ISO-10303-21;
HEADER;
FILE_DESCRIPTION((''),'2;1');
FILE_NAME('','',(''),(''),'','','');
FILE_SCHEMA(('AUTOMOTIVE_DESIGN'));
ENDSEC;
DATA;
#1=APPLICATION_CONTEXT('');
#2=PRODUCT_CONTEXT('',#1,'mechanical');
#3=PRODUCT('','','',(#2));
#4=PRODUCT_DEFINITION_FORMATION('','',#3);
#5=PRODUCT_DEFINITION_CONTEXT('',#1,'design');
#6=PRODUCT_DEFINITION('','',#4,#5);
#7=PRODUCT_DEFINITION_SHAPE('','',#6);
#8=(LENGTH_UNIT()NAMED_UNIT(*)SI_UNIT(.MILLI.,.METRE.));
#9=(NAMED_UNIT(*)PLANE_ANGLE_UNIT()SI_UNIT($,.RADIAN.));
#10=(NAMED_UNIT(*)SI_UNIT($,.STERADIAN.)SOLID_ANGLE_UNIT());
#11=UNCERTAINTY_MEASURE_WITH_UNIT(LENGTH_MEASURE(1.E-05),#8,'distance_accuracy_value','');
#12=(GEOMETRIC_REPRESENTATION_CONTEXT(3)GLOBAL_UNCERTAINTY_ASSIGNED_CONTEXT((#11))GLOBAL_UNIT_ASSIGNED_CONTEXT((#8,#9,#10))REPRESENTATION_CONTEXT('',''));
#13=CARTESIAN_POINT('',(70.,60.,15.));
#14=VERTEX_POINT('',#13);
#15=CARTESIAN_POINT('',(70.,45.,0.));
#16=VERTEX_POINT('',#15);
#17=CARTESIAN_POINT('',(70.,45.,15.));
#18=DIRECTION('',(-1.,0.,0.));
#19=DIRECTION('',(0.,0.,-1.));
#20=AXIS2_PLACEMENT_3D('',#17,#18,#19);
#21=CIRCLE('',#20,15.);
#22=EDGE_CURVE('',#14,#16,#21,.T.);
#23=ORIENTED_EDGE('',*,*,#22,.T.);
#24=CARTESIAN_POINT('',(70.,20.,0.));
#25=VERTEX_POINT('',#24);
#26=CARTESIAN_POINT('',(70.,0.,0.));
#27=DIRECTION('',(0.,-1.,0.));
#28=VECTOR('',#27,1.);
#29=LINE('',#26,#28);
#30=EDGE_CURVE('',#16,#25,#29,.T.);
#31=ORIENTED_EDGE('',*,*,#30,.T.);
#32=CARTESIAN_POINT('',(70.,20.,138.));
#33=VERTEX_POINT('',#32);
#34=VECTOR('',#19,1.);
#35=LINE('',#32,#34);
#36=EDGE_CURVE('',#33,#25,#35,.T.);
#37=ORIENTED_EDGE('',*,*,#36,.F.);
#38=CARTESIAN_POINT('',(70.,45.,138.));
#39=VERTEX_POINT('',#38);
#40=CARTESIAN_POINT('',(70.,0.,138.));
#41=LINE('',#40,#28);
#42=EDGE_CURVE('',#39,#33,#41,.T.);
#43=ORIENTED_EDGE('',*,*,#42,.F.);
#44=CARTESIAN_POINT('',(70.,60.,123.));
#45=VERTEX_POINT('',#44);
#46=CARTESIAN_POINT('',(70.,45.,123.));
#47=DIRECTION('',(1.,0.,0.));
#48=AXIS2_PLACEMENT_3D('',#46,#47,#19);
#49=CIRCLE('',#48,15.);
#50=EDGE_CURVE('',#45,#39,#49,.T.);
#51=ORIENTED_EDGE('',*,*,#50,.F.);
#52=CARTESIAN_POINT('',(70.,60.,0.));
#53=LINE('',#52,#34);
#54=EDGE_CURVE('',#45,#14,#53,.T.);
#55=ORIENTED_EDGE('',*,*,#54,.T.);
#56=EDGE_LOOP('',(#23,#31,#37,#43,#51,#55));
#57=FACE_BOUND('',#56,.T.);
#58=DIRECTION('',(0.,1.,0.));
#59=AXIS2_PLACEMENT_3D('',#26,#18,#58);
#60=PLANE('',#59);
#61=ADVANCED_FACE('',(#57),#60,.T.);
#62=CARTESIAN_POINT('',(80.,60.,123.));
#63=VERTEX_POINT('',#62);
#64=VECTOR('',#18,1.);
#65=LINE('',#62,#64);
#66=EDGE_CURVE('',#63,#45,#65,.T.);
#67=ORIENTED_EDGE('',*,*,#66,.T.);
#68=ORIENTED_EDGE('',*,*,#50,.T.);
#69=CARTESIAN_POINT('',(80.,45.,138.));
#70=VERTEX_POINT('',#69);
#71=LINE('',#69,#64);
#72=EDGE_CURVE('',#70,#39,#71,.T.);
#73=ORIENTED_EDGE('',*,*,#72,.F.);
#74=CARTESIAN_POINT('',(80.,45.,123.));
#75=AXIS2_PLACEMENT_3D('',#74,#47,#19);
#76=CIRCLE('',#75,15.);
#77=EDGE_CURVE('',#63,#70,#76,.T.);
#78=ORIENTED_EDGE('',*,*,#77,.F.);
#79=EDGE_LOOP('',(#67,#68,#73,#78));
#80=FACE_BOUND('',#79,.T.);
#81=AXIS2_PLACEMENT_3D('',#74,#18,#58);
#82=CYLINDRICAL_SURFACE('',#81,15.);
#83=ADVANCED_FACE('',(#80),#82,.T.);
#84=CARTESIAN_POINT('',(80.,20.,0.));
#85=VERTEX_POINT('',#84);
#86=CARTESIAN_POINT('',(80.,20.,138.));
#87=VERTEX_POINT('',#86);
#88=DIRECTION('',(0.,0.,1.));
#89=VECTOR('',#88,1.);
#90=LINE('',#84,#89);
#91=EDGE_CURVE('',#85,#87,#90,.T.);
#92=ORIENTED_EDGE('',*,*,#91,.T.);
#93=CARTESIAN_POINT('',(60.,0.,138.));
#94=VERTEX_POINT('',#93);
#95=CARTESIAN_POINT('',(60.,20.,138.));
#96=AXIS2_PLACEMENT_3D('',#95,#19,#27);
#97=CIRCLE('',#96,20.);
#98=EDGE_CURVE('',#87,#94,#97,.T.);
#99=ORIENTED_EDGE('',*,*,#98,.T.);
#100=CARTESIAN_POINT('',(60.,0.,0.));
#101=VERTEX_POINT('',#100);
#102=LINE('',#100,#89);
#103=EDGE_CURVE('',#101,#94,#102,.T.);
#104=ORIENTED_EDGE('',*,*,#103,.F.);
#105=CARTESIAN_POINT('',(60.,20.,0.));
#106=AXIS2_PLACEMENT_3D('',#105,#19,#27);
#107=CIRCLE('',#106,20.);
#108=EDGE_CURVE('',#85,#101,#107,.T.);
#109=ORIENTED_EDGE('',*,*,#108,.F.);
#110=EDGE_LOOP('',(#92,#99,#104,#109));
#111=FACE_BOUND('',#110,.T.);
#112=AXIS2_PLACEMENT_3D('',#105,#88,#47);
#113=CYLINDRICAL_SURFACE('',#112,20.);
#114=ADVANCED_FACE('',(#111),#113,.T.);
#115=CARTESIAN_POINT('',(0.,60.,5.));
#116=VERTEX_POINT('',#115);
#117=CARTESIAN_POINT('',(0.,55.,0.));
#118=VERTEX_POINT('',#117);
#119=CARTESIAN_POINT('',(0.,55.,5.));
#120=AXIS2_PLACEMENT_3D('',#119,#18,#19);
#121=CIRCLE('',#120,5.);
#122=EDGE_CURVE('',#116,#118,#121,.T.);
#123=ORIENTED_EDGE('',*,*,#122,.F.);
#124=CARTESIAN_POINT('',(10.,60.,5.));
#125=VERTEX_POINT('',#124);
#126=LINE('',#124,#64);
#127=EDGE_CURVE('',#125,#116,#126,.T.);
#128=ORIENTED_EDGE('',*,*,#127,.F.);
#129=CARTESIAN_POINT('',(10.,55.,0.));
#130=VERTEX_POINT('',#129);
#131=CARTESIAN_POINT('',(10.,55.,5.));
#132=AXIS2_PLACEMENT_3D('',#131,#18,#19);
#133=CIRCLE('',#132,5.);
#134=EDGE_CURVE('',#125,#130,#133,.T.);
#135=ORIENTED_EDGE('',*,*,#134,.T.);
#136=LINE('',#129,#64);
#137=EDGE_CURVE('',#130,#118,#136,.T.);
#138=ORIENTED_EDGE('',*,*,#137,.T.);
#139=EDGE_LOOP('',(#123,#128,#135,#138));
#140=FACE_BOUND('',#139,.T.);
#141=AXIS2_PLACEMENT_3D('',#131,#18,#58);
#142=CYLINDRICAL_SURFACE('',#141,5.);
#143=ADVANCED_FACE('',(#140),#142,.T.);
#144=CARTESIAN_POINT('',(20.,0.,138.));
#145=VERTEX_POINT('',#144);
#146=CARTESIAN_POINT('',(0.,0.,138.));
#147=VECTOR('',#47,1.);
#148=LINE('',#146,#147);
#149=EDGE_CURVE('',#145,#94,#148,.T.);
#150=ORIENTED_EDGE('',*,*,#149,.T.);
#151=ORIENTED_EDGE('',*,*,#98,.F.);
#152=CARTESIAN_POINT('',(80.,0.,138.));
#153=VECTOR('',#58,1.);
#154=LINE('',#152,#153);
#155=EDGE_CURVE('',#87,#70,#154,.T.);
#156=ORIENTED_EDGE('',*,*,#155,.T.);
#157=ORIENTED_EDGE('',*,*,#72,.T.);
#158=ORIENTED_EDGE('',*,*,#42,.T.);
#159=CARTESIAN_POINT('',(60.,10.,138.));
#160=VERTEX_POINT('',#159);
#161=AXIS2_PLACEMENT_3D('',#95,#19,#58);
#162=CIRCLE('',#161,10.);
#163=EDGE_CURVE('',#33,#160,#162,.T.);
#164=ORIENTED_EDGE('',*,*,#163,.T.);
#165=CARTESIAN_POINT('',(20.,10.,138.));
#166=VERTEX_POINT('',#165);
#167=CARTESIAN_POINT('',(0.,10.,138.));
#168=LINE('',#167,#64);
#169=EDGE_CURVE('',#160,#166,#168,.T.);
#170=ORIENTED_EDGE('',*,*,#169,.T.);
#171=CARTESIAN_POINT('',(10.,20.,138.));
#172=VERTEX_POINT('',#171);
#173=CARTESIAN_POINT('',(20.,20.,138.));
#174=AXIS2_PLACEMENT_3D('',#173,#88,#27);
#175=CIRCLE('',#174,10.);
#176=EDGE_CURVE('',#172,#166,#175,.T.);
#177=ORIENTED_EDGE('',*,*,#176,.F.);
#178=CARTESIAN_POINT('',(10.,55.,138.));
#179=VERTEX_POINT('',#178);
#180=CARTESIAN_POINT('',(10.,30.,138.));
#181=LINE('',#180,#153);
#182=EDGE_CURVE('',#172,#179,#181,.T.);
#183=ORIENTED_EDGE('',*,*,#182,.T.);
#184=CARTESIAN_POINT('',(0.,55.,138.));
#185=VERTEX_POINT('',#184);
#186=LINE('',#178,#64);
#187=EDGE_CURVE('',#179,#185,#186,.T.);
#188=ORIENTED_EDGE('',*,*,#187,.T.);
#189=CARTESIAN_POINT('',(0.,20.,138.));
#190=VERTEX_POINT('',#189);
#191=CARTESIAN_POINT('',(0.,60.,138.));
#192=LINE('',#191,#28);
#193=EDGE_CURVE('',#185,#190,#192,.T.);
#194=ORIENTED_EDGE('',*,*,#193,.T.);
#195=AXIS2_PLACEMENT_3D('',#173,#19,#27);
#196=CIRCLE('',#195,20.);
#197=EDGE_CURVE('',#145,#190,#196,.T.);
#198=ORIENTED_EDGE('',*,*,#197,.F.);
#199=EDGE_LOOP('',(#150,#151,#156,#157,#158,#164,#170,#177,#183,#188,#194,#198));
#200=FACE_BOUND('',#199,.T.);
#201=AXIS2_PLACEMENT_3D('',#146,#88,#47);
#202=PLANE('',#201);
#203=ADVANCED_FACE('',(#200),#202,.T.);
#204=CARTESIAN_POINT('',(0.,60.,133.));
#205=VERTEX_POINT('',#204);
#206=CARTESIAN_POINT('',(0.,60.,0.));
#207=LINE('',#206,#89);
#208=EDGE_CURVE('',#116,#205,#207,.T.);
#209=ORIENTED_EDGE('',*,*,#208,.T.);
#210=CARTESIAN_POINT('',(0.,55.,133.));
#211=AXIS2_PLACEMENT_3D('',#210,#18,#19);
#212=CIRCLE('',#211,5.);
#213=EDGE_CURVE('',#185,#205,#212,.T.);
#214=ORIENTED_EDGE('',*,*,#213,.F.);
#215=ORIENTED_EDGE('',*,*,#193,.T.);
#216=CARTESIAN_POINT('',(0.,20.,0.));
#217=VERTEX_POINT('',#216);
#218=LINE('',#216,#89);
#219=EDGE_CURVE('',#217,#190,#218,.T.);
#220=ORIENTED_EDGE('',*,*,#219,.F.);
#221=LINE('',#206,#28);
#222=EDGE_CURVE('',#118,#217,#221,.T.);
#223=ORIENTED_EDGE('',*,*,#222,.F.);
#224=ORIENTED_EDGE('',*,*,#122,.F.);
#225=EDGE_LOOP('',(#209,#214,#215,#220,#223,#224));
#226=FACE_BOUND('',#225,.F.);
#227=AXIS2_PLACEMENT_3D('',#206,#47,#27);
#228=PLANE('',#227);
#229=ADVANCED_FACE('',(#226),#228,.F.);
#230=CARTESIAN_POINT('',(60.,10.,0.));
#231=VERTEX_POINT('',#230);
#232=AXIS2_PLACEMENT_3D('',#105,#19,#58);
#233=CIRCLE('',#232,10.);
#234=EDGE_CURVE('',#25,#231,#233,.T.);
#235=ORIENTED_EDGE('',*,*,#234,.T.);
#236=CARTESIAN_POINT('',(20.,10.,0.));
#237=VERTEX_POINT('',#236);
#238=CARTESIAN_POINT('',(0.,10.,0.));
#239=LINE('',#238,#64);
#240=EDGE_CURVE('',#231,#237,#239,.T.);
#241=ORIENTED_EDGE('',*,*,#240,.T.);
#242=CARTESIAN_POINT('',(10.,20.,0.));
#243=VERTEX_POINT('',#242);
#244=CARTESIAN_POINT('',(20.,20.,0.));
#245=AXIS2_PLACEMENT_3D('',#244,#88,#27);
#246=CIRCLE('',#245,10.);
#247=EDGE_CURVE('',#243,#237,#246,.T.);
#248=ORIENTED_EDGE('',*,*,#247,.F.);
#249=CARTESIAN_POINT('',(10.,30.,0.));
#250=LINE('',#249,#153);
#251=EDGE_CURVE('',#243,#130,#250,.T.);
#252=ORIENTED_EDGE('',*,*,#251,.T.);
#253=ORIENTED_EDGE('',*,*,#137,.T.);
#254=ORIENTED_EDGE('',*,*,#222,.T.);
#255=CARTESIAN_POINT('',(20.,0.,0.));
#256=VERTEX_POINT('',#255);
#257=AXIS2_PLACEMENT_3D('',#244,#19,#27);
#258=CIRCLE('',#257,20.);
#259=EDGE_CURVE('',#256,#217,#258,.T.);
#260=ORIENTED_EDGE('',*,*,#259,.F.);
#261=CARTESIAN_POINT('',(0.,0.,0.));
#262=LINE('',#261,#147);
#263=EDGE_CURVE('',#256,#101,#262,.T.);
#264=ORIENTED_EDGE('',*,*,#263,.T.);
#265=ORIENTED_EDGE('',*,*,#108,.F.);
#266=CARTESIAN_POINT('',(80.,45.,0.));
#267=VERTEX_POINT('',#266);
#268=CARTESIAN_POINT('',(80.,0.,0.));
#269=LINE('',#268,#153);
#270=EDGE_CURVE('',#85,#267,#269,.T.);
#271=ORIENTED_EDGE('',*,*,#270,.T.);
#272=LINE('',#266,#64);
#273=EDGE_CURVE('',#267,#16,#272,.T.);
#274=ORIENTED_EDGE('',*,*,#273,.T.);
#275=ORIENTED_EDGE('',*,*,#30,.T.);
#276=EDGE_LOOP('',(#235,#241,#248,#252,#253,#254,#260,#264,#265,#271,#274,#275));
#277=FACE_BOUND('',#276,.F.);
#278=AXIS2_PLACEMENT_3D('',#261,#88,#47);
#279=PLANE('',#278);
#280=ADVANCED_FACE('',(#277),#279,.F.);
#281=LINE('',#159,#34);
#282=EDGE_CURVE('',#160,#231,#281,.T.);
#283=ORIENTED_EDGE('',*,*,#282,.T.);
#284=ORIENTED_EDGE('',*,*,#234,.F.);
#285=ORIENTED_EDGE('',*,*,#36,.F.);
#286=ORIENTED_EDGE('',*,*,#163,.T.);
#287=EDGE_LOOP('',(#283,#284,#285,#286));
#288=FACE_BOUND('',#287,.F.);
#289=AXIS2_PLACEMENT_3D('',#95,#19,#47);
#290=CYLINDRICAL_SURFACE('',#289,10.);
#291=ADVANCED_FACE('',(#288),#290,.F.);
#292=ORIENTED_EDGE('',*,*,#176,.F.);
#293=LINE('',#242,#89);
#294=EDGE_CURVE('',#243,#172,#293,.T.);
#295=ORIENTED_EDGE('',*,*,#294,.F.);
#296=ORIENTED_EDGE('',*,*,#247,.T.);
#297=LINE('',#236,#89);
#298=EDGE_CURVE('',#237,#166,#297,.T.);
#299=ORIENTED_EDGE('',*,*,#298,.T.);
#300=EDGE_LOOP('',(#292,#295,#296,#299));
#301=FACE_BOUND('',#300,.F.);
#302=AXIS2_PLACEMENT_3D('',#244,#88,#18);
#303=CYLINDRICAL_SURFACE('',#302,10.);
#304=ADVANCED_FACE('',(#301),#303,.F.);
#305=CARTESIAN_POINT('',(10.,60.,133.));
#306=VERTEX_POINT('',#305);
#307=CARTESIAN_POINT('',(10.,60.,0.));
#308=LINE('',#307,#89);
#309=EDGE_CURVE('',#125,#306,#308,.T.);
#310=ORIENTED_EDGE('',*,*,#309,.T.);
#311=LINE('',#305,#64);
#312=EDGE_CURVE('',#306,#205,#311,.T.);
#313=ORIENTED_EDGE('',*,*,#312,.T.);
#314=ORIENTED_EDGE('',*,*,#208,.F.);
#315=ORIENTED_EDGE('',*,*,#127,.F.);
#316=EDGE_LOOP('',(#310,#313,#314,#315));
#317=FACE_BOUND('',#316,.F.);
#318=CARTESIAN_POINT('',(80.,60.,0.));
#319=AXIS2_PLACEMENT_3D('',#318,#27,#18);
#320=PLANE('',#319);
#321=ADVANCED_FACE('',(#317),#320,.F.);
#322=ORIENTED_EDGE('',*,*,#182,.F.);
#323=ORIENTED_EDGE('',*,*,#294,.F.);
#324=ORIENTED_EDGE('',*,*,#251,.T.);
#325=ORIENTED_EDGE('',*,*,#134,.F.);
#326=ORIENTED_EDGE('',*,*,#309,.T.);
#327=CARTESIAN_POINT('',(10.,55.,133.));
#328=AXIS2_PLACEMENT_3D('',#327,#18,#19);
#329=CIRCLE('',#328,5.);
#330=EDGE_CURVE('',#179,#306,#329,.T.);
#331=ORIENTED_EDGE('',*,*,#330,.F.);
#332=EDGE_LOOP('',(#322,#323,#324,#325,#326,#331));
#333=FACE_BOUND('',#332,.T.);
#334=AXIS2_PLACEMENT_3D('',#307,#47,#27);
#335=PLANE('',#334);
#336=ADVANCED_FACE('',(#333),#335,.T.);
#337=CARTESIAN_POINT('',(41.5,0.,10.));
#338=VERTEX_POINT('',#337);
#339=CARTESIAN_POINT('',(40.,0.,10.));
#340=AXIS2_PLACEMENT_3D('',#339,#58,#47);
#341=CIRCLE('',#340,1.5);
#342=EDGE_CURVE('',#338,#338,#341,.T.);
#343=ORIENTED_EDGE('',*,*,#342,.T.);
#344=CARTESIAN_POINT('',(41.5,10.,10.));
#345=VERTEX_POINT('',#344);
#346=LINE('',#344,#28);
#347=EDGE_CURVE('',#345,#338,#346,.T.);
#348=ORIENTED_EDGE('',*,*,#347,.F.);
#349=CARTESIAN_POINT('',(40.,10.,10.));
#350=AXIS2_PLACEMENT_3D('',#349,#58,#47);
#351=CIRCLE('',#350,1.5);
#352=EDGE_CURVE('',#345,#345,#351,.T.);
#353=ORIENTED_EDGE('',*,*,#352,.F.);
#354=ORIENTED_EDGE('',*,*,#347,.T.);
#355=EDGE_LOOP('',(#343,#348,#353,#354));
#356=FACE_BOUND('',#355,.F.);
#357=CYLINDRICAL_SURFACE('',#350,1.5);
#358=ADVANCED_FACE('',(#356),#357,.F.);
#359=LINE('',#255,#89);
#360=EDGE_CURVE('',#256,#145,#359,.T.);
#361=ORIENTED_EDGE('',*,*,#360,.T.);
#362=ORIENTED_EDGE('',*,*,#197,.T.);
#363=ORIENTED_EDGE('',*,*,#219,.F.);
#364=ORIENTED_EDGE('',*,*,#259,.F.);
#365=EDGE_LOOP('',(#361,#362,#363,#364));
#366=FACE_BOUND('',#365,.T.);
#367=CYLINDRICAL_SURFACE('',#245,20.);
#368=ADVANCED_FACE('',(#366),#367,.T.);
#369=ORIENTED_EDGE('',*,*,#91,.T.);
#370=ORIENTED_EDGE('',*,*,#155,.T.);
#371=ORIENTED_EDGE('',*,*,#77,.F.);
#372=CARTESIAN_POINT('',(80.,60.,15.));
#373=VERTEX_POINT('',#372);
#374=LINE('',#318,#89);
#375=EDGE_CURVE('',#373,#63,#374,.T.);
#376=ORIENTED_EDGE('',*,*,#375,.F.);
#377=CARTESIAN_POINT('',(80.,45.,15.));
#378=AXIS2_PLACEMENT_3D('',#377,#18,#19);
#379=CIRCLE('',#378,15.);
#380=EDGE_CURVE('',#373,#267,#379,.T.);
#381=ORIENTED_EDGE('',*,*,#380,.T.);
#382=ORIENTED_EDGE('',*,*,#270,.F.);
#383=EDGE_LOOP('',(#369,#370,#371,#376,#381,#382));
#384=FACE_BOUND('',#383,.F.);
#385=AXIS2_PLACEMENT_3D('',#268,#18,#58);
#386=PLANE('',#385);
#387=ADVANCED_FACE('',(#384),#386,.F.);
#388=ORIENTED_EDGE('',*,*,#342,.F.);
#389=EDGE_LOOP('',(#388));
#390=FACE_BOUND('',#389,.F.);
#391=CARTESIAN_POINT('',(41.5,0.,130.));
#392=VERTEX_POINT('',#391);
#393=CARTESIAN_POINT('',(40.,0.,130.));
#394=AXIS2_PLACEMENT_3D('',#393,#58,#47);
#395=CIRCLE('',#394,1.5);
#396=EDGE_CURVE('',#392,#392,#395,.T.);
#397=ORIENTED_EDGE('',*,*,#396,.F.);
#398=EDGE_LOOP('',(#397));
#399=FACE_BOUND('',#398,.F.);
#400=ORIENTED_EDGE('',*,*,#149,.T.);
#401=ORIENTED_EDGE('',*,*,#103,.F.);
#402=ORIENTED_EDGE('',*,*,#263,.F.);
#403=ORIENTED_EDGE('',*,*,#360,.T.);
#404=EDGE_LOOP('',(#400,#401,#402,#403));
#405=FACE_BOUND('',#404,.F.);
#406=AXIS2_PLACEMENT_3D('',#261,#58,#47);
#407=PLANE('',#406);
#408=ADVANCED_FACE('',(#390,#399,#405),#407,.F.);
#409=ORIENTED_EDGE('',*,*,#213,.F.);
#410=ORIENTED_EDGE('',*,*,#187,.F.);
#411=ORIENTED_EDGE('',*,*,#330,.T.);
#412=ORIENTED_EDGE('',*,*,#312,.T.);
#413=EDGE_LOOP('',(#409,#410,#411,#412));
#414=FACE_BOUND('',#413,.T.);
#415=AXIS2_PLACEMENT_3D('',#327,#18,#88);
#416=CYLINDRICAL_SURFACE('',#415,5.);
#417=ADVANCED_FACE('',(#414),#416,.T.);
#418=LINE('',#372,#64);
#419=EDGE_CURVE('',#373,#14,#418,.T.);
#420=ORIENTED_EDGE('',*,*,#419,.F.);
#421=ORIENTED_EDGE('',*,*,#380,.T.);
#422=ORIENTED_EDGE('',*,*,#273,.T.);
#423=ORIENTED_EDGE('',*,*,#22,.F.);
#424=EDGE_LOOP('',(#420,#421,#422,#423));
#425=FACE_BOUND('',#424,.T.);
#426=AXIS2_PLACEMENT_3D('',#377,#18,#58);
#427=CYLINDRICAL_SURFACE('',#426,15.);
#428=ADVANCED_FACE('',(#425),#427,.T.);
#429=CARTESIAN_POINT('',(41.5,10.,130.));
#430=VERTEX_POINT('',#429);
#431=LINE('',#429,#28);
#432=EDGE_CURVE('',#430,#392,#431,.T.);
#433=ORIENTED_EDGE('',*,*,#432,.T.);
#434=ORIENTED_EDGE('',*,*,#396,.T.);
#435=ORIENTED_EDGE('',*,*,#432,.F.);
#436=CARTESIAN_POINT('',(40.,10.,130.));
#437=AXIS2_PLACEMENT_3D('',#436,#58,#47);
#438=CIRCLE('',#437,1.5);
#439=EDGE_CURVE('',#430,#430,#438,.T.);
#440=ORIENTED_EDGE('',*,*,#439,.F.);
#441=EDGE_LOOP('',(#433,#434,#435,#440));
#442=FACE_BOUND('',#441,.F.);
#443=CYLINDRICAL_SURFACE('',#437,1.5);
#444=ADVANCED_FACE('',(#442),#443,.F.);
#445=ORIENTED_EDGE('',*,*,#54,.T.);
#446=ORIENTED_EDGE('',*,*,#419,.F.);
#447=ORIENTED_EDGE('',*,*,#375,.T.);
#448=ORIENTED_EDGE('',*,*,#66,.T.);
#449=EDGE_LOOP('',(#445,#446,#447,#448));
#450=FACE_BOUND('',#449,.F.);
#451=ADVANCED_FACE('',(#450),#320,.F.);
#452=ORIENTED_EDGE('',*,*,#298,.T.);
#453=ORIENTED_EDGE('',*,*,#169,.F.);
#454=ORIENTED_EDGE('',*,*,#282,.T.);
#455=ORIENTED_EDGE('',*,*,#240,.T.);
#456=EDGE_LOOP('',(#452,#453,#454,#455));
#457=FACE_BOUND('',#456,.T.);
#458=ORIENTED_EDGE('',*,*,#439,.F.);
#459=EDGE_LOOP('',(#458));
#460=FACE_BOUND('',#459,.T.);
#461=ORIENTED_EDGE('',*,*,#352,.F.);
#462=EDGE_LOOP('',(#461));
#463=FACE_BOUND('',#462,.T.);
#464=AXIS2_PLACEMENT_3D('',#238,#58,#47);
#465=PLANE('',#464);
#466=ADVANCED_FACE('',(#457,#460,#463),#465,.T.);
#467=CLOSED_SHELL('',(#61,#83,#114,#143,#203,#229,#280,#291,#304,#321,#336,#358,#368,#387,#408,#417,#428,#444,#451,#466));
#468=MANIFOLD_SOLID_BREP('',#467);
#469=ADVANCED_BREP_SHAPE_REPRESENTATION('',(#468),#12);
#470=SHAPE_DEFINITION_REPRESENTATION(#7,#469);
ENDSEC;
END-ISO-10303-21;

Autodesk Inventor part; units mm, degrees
ref_plane "YZ Plane" through (0, 0, 0) normal (1, 0, 0) x (0, 1, 0)
ref_plane "XZ Plane" through (0, 0, 0) normal (0, 1, 0) x (-1, 0, 0)
ref_plane "XY Plane" through (0, 0, 0) normal (0, 0, 1) x (1, 0, 0)
sketch "Sketch1" plane through (0, 0, 0) normal (0, 0, 1) x (1, 0, 0)
  line L0 (0, 0) -> (80, 0)
  line L1 (80, 0) -> (80, 60)
  line L2 (80, 60) -> (0, 60)
  line L3 (0, 60) -> (0, 0)
  dimension "d0" = 80
  dimension "d1" = 60
extrude "Extrusion1" add sketch "Sketch1" along normal blind 138
shell "Shell1" thickness 10 removed faces 3 at (53.3333, 60, 46) at (26.6667, 40, 138) at (26.6667, 40, 0)
fillet "Fillet1" radius 10 2 edges at (10, 10, 69) (70, 10, 69)
fillet "Fillet2" radius 20 1 edges at (80, 0, 69)
fillet "Fillet3" radius 20 1 edges at (0, 0, 69)
sketch "Sketch2" plane through (80, 60, 138) normal (1, 0, 0) x (0, 0, -1)
  point P0 (138, -60)
fillet "Fillet4" radius 15 1 edges at (75, 60, 0)
fillet "Fillet5" radius 15 1 edges at (75, 60, 138)
fillet "Fillet6" radius 5 1 edges at (5, 60, 138)
fillet "Fillet7" radius 5 1 edges at (5, 60, 0)
sketch "Sketch5" plane through (20, 10, 0) normal (0, 1, 0) x (1, 0, 0)
  line L0 (40, -138) -> (0, -138) projected
  line L1 (0, 0) -> (40, 0) projected
  circle A0 centre (20, -130) radius 1.5
  circle A1 centre (20, -10) radius 1.5
  point P0 (-20, 0)
  dimension "d13" = 3
  dimension "d15" = 3
extrude "Extrusion2" cut sketch "Sketch5" against normal through all
thread "Thread1" size "M3x0.5" class "6H" standard "ANSI Metric M Profile" full length
thread "Thread2" size "M3x0.5" class "6H" standard "ANSI Metric M Profile" full length
sketch "Sketch6" plane through (20, 10, 0) normal (0, 1, 0) x (1, 0, 0)
  point P0 (-20, 0)
properties part number "BREAD"
